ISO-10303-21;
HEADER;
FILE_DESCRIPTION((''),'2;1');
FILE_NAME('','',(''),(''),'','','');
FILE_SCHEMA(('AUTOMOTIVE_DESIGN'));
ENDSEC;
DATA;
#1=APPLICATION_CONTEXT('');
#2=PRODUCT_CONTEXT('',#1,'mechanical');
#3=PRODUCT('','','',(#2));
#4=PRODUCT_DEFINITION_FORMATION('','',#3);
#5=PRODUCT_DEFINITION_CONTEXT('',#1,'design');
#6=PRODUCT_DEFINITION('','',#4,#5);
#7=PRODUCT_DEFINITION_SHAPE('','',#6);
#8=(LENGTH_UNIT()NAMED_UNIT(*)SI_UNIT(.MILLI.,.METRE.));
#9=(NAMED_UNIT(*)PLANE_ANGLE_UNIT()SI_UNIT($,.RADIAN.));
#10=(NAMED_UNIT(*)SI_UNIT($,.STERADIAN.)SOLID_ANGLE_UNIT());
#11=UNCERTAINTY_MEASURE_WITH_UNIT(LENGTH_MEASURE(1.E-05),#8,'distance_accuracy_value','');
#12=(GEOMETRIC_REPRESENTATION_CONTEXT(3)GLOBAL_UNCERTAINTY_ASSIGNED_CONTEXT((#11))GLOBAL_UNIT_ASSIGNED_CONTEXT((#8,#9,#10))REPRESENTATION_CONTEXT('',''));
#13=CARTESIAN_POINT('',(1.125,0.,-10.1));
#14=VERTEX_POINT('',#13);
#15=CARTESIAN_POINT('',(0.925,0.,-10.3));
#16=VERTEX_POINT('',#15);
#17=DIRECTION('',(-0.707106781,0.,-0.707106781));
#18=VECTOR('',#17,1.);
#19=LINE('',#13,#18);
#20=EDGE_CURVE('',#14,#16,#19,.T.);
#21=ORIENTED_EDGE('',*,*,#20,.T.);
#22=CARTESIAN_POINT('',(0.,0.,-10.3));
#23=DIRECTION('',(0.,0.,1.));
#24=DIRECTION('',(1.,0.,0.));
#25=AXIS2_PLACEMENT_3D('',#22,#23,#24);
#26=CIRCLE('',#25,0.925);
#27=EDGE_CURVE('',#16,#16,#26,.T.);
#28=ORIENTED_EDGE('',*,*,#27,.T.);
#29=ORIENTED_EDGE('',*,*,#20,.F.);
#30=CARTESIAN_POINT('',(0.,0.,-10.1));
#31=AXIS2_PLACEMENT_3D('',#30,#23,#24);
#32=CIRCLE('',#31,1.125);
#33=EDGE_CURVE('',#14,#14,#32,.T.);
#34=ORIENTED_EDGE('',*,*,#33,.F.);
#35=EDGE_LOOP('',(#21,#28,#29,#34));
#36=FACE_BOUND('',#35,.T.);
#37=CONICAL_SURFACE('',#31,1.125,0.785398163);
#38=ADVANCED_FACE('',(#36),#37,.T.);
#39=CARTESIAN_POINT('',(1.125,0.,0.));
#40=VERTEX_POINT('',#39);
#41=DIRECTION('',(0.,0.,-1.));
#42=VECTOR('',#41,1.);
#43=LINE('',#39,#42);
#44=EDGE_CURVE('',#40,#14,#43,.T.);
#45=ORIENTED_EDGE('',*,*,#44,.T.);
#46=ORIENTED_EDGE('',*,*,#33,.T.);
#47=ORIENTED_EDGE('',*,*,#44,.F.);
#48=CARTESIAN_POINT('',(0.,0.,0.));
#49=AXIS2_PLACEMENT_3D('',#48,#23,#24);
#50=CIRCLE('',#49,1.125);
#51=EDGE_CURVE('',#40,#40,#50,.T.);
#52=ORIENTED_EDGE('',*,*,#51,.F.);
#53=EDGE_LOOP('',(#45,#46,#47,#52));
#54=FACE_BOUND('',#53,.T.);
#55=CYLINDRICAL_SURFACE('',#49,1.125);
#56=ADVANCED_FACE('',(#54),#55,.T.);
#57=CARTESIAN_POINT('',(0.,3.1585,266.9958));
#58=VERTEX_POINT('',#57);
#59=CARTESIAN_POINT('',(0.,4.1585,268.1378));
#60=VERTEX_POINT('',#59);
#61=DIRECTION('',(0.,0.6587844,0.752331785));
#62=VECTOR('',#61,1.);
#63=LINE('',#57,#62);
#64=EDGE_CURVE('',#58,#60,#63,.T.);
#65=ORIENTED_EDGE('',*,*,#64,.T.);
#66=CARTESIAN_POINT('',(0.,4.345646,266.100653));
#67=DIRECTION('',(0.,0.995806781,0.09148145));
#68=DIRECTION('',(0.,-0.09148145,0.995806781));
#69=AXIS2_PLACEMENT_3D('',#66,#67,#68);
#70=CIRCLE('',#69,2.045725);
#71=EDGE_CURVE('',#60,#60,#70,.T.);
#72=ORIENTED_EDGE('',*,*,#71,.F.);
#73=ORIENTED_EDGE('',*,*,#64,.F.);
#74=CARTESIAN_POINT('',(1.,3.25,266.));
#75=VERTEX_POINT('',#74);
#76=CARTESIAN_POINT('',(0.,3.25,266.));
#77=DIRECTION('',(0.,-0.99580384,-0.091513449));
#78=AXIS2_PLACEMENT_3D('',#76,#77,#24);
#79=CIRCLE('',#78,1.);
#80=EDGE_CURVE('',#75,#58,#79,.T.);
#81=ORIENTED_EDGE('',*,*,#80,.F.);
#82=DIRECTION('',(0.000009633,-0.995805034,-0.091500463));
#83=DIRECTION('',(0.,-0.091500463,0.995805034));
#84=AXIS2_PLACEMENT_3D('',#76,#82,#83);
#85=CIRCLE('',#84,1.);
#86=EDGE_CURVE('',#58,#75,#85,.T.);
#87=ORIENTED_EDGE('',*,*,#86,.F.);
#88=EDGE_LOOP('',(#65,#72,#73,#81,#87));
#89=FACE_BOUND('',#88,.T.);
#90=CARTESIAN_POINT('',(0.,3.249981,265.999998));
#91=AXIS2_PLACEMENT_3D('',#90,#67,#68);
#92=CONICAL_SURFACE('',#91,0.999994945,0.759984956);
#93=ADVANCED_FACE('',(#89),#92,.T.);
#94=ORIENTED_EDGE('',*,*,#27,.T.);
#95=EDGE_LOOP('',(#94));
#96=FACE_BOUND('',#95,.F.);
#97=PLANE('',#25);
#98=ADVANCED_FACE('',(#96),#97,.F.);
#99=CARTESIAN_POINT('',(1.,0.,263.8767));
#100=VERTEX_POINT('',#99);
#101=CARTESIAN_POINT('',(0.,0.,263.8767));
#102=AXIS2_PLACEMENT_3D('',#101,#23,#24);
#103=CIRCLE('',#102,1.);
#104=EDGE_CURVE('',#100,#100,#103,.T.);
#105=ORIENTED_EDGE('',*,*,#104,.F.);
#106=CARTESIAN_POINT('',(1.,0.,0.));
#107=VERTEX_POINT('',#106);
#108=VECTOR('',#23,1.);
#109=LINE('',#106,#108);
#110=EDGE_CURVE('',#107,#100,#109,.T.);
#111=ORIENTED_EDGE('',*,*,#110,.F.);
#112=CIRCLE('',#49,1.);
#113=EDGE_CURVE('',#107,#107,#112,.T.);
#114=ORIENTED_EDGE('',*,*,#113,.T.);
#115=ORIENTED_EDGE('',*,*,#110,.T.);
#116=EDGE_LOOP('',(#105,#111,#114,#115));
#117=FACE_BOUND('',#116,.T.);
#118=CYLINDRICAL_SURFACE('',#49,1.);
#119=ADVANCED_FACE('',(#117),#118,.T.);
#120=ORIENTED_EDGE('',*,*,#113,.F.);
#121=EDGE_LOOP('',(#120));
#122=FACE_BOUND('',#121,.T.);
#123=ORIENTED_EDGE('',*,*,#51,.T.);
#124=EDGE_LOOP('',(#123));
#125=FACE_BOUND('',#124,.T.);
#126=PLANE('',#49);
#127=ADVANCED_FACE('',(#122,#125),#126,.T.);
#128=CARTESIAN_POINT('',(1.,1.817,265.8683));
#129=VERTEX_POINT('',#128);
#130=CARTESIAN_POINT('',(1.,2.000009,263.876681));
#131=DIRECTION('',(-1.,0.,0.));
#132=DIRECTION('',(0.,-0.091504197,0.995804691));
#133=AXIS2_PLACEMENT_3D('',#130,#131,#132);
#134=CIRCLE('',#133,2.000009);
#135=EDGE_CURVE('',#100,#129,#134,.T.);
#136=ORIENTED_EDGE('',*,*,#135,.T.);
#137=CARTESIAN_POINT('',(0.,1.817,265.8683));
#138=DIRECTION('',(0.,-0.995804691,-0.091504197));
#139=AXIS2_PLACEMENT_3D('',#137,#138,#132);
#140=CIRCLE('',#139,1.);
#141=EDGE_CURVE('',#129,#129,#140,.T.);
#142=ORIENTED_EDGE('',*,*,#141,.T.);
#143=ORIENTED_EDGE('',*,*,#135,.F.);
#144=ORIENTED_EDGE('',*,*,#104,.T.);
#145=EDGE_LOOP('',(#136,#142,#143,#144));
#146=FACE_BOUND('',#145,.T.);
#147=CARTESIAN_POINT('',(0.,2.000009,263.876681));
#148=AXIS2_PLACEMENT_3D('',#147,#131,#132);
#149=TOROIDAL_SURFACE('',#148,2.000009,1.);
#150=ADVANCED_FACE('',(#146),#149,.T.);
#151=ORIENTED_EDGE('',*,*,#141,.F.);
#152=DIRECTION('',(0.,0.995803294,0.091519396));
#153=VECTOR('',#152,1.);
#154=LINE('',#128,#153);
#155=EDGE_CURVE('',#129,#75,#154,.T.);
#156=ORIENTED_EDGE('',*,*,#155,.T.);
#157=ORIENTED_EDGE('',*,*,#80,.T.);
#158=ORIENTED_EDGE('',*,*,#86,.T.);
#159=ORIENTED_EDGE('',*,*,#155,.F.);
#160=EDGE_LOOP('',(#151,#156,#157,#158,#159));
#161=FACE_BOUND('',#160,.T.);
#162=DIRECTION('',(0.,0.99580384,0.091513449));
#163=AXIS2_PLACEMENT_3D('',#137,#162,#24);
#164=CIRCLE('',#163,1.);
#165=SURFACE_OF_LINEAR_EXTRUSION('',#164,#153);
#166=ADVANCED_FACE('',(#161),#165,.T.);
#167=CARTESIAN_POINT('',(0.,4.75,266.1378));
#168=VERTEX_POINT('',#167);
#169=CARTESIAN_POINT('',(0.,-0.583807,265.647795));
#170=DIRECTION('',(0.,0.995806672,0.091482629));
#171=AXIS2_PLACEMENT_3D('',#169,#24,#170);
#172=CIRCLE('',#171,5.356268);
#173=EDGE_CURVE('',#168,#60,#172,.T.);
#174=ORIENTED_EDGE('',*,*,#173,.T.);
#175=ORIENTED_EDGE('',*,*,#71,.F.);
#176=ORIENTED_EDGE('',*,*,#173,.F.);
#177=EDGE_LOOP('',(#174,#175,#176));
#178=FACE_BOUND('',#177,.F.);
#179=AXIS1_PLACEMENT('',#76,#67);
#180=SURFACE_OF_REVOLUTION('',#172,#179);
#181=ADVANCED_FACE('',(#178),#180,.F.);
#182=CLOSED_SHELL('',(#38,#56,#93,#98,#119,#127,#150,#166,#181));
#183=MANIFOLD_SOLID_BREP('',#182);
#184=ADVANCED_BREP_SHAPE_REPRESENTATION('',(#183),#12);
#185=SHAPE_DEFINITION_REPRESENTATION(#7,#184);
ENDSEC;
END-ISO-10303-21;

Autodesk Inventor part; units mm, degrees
ref_plane "YZ Plane" through (0, 0, 0) normal (1, 0, 0) x (0, 1, 0)
ref_plane "XZ Plane" through (0, 0, 0) normal (0, 1, 0) x (-1, 0, 0)
ref_plane "XY Plane" through (0, 0, 0) normal (0, 0, 1) x (1, 0, 0)
sketch "Szkic1" plane through (0, 0, 0) normal (0, 0, 1) x (1, 0, 0)
  circle A0 centre (0, 0) radius 1
  dimension "d0" = 2
sketch "Szkic4" plane through (0, 0, 0) normal (1, 0, 0) x (0, 1, 0)
  line L0 (0, 0) -> (0, 263.8767)
  arc A0 (1.817, 265.8683) -> (0, 263.8767) centre (2, 263.8767) ccw
  line L1 (1.817, 265.8683) -> (3.25, 266)
  dimension "d2" = 266
  dimension "d3" = 2
  dimension "d4" = 3.25
  dimension "d5" = 95.25
sweep "Szprycha" add profiles "Szkic1" path "Szkic4"
sketch "Szkic5" plane through (0, 0, 0) normal (1, 0, 0) x (0, 1, 0)
  line L0 (3.3415, 265.0042) -> (3.1585, 266.9958) construction
  line L1 (3.1585, 266.9958) -> (3.25, 266)
  line L2 (3.1585, 266.9958) -> (4.1585, 268.1378)
  arc A0 (4.75, 266.1378) -> (4.1585, 268.1378) centre (-0.5843, 265.6477) ccw
  line L3 (1.7255, 266.8641) -> (3.1585, 266.9958) construction
  line L4 (1.9085, 264.8725) -> (3.3415, 265.0042) construction
  line L5 (1.9085, 264.8725) -> (1.7255, 266.8641) construction
  line L6 (1.817, 265.8683) -> (3.25, 266) construction
  line L7 (3.25, 266) -> (4.75, 266.1378)
  point P0 (0, 0)
  dimension "d7" = 1
  dimension "d8" = 1.5
  dimension "d10" = 2
revolve "Główka" add sketch "Szkic5" angle 360 about axis through (0, 3.25, 266) along (0, 0.9958049, 0.0915016)
sketch "Szkic6" plane through (0, 0, 0) normal (0, 0, 1) x (1, 0, 0)
  circle A0 centre (0, 0) radius 1.125
  dimension "d13" = 2.25
extrude "Połączenie z nyplem" add sketch "Szkic6" against normal blind 10.3
chamfer "Faza1" distance 0.2 angle 45 1 edges at (-1.125, 0, -10.3)
thread "Gwint2"
properties part number "Szprycha" material "Aluminium AW-7020"
